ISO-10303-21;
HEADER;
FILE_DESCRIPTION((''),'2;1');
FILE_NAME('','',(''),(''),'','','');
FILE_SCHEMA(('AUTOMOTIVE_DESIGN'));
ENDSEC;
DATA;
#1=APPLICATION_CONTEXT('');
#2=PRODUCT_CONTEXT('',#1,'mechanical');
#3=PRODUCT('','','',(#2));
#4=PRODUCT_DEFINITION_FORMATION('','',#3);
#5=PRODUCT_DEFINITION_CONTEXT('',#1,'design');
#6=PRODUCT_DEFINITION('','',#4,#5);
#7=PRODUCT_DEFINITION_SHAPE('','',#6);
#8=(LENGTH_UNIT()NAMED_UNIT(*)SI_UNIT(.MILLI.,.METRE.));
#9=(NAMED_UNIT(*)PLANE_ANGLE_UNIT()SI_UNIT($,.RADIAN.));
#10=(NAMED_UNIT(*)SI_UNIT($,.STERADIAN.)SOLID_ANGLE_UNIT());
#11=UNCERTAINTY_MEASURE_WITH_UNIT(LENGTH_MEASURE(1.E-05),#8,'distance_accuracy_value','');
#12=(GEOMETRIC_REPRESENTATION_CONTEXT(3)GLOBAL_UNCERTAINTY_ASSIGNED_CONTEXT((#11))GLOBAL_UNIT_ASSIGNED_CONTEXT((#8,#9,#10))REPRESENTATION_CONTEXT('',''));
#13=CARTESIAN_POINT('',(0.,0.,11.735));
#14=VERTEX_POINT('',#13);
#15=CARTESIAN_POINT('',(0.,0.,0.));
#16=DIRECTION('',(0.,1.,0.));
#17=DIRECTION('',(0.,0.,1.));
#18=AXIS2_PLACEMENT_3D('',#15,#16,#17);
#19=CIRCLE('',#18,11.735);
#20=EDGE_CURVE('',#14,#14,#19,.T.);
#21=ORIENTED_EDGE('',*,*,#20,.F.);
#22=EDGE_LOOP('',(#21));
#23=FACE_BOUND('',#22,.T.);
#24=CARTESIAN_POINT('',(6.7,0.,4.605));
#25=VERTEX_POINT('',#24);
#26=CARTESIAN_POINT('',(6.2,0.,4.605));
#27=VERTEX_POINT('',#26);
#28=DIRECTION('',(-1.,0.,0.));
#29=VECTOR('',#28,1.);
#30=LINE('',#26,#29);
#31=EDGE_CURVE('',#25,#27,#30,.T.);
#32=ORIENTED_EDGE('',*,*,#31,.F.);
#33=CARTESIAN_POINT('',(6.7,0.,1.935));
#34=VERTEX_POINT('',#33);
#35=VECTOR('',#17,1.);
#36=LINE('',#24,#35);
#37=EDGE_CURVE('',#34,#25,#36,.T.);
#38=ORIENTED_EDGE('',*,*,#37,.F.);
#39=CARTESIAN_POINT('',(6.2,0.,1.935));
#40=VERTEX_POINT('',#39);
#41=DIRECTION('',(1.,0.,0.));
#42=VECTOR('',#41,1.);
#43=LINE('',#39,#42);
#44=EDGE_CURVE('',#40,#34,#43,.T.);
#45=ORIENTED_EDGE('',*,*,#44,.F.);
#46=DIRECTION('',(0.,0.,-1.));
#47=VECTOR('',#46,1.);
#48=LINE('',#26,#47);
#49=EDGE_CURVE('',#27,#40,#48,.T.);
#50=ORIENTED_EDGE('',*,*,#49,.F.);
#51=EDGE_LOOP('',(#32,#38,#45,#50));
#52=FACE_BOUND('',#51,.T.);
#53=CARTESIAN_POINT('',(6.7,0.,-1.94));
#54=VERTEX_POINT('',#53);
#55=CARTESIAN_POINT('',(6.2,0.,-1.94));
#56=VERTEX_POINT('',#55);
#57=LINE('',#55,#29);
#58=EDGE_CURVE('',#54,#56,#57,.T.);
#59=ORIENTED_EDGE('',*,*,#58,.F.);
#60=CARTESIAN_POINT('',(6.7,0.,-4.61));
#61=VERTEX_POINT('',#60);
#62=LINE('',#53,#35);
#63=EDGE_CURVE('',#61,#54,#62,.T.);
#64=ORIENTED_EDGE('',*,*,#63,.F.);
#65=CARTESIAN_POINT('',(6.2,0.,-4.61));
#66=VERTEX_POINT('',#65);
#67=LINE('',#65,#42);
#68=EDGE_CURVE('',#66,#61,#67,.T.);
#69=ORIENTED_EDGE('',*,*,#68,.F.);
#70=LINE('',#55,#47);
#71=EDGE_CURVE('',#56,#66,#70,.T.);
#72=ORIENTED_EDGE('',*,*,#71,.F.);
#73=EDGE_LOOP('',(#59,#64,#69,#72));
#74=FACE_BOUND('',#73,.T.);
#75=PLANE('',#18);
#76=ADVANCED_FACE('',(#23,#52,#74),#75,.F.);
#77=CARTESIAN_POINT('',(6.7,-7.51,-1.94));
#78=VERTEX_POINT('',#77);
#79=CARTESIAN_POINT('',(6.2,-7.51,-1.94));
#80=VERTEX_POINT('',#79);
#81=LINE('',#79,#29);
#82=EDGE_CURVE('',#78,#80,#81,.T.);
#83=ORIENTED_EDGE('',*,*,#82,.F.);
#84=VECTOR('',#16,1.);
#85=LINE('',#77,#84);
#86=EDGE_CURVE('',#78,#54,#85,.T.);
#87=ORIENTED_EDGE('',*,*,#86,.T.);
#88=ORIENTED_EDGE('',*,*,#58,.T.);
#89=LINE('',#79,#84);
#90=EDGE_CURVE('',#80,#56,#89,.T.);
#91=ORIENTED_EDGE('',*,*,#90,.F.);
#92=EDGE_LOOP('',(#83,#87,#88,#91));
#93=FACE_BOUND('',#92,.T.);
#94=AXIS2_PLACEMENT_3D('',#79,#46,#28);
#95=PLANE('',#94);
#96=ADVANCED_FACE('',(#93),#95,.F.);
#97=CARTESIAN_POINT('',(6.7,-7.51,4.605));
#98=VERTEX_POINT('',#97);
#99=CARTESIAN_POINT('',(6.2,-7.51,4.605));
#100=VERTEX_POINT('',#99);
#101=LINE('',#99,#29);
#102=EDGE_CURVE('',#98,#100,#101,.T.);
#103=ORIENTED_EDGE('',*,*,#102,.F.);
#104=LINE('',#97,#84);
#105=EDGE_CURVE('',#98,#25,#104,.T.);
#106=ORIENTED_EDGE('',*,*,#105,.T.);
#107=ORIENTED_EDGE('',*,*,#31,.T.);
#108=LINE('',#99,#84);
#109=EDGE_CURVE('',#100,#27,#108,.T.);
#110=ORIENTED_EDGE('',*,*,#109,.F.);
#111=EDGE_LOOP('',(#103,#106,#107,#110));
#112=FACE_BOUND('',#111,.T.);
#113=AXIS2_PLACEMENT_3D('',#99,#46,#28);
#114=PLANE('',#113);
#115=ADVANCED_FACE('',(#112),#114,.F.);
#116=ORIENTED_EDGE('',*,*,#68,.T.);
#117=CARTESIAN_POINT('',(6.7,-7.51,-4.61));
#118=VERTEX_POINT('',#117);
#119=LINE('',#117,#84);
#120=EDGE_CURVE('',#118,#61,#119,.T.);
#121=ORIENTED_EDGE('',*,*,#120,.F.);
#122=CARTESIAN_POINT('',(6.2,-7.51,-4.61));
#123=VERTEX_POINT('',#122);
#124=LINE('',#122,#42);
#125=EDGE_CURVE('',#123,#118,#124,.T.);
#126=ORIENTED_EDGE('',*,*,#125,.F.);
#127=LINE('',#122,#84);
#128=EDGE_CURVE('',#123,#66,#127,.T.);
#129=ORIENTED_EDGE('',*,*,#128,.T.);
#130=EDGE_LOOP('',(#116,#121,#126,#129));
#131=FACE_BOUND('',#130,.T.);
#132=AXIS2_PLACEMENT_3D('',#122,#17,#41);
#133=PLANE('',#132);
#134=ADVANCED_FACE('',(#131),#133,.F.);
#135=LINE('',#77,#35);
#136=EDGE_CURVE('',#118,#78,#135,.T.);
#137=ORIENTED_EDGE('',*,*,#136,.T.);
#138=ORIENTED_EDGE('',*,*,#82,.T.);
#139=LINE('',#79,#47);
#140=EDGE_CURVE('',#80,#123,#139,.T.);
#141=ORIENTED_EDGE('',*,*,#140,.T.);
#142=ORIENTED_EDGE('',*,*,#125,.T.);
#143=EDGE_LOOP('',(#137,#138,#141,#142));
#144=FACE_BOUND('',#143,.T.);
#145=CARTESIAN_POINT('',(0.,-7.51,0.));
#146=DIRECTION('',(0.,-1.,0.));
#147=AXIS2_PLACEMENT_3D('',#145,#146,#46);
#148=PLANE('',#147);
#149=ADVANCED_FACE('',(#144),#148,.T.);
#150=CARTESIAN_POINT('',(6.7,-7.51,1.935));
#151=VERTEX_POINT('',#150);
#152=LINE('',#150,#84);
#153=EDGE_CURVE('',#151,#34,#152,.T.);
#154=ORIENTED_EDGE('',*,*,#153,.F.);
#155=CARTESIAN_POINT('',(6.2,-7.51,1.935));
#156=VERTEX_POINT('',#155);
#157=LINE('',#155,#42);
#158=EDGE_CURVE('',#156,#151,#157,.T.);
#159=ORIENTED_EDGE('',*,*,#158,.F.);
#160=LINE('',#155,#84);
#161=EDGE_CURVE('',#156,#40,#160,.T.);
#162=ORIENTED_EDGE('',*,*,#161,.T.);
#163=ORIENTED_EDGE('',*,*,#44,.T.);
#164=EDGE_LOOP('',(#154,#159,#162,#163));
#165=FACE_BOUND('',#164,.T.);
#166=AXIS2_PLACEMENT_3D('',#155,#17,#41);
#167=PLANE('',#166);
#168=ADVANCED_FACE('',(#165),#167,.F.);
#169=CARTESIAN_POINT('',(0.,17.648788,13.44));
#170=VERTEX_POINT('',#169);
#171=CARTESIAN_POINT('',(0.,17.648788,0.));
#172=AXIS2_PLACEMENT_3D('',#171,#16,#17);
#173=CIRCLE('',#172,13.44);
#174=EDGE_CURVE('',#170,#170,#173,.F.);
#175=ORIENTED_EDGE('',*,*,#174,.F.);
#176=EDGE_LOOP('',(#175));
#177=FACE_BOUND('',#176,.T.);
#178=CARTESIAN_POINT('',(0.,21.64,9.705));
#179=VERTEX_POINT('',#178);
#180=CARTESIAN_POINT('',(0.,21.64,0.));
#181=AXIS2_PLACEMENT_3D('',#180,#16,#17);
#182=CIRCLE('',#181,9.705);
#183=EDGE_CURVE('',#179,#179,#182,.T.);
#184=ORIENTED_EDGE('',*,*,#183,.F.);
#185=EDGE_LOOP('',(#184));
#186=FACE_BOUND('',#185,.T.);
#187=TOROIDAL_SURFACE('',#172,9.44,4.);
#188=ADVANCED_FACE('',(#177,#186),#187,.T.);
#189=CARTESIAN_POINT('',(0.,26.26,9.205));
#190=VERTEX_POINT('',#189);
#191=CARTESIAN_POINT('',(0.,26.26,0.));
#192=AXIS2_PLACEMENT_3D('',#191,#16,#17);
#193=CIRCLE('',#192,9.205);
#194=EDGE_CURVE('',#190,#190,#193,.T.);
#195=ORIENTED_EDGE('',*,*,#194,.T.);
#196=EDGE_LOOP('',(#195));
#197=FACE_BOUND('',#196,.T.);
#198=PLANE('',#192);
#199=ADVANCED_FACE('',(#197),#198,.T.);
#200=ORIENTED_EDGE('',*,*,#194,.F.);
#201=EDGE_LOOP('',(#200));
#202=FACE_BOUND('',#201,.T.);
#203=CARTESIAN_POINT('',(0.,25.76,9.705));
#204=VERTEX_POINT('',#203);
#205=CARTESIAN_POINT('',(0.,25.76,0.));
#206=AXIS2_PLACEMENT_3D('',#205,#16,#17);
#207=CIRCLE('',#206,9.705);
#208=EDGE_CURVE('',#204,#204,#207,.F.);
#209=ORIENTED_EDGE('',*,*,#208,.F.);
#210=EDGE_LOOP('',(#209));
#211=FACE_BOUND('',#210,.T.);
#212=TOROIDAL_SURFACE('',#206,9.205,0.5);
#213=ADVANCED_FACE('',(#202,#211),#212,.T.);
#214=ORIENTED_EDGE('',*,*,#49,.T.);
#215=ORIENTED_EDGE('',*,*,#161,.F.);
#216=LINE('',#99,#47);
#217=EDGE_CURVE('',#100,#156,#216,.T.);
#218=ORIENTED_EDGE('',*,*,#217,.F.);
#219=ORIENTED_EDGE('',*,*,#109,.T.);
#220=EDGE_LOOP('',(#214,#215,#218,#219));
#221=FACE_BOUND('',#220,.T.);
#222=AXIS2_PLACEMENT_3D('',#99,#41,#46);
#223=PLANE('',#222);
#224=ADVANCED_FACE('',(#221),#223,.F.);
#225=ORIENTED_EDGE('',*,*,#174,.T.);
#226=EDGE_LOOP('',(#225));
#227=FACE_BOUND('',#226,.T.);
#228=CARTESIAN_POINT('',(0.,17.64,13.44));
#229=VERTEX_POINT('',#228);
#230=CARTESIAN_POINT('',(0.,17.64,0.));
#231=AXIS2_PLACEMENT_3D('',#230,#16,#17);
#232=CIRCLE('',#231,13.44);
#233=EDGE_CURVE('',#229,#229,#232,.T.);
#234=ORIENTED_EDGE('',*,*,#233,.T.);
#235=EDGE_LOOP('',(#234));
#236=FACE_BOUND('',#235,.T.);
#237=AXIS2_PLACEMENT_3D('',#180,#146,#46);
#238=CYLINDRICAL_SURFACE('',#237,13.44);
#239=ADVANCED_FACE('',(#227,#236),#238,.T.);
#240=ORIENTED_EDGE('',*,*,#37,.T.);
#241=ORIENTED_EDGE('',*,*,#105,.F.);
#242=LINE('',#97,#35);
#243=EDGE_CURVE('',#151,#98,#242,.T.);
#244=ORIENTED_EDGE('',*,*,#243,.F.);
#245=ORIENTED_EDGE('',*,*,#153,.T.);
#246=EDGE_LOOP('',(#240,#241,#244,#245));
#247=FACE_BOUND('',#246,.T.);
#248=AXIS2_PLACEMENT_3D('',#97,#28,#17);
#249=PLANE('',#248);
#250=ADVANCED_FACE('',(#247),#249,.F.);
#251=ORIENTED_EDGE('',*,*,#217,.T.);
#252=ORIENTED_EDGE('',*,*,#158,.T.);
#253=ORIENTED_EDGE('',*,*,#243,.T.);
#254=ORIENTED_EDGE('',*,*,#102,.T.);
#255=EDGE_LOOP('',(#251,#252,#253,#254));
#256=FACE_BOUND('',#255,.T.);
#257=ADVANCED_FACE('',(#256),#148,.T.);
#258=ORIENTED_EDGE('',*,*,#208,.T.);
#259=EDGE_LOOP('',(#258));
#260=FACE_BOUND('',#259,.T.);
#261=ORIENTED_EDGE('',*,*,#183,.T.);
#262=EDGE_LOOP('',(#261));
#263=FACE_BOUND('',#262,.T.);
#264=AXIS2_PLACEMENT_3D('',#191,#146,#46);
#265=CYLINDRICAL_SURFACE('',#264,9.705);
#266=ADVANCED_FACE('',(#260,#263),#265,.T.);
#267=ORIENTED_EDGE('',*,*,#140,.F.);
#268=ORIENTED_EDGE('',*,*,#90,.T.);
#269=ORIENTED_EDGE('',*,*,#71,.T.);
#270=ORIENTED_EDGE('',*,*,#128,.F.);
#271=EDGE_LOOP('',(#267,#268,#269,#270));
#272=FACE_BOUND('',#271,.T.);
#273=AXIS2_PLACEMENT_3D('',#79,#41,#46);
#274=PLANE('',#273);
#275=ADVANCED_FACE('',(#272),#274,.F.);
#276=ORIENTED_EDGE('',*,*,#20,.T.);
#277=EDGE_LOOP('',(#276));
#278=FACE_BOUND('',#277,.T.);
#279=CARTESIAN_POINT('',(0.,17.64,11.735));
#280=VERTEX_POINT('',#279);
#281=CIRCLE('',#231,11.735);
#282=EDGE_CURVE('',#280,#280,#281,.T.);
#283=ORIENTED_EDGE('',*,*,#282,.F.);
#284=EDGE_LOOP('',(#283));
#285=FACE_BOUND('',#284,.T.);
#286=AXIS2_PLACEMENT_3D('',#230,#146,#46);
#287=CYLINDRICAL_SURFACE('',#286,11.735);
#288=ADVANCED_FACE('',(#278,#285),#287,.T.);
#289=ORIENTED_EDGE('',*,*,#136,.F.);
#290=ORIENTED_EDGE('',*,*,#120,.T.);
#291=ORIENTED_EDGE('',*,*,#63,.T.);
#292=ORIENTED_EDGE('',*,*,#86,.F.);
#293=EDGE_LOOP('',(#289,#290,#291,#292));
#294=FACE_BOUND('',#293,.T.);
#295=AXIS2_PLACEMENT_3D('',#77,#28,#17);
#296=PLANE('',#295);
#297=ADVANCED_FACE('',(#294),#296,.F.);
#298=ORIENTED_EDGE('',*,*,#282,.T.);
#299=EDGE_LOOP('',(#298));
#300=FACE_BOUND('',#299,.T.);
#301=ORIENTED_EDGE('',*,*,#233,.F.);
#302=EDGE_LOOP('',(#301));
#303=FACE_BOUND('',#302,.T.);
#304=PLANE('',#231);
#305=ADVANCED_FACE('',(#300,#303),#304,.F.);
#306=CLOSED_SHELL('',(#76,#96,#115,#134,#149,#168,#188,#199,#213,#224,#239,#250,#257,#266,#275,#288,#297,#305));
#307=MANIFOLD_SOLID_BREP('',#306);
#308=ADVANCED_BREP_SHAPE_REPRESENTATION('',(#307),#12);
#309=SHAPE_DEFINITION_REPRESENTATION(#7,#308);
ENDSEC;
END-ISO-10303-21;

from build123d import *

# Parameters (mm, degrees)
SKETCH1_R           = 11.735
BOSS_EXTRUDE1_DEPTH = 17.64
SKETCH2_R           = 13.44
BOSS_EXTRUDE2_DEPTH = 4
SKETCH3_R           = 9.705
BOSS_EXTRUDE3_DEPTH = 4.62
FILLET1_R           = 4
FILLET2_R           = 0.5
SKETCH4_W           = 0.5
SKETCH4_H           = 2.67
BOSS_EXTRUDE4_DEPTH = 7.51


with BuildPart() as part:
    # Sketch1 → Boss-Extrude1 (new body)
    with BuildSketch(Plane(origin=(0, 0, 0), x_dir=(1, 0, 0), z_dir=(0, 1, 0))):
        with Locations(Location((0, 0, 0), (0, 0, 270))):
            Circle(SKETCH1_R)
    extrude(amount=BOSS_EXTRUDE1_DEPTH)

    # Sketch2 → Boss-Extrude2 (add)
    with BuildSketch(Plane(origin=(0, 17.64, 0), x_dir=(1, 0, 0), z_dir=(0, 1, 0))):
        with Locations(Location((0, 0, 0), (0, 0, 270))):
            Circle(SKETCH2_R)
    extrude(amount=BOSS_EXTRUDE2_DEPTH)

    # Sketch3 → Boss-Extrude3 (add)
    with BuildSketch(Plane(origin=(0, 21.64, 0), x_dir=(1, 0, 0), z_dir=(0, 1, 0))):
        with Locations(Location((0, 0, 0), (0, 0, 270))):
            Circle(SKETCH3_R)
    extrude(amount=BOSS_EXTRUDE3_DEPTH)

    # Fillet1
    # the kernel refuses this fillet: 4 mm, written as the material it takes off along each edge
    with BuildSketch(Plane(origin=(0, 21.64, 0), x_dir=(0, 0, 1), z_dir=(-1, 0, 0))) as fillet1_piece_1:
        with BuildLine():
            CenterArc((9.44, -3.991212222), FILLET1_R, 0, 86.201372408)
            Line((9.705, 0), (9.7103, 0.079824244))
            ThreePointArc((9.7103, 0.079824244), (11.5725, 0.08), (13.44, 0.08))
            Line((13.44, 0.08), (13.52, 0))
            Line((13.52, 0), (13.52, -3.991212222))
            Line((13.52, -3.991212222), (13.44, -3.991212222))
        make_face()
    revolve(axis=Axis((0, 21.64, 0), (0, 1, 0)), mode=Mode.SUBTRACT)

    # Fillet2
    fillet2_edges = [part.edges().sort_by_distance(p)[0] for p in [
        (0, 26.26, -9.705),
    ]]
    fillet(fillet2_edges, radius=FILLET2_R)

    # Sketch4 → Boss-Extrude4 (add)
    with BuildSketch(Plane.XZ):
        with Locations((6.45, 3.27)):
            Rectangle(SKETCH4_W, SKETCH4_H)
        with Locations((6.45, -3.275)):
            Rectangle(SKETCH4_W, SKETCH4_H)
    extrude(amount=BOSS_EXTRUDE4_DEPTH)


solid = part.part
